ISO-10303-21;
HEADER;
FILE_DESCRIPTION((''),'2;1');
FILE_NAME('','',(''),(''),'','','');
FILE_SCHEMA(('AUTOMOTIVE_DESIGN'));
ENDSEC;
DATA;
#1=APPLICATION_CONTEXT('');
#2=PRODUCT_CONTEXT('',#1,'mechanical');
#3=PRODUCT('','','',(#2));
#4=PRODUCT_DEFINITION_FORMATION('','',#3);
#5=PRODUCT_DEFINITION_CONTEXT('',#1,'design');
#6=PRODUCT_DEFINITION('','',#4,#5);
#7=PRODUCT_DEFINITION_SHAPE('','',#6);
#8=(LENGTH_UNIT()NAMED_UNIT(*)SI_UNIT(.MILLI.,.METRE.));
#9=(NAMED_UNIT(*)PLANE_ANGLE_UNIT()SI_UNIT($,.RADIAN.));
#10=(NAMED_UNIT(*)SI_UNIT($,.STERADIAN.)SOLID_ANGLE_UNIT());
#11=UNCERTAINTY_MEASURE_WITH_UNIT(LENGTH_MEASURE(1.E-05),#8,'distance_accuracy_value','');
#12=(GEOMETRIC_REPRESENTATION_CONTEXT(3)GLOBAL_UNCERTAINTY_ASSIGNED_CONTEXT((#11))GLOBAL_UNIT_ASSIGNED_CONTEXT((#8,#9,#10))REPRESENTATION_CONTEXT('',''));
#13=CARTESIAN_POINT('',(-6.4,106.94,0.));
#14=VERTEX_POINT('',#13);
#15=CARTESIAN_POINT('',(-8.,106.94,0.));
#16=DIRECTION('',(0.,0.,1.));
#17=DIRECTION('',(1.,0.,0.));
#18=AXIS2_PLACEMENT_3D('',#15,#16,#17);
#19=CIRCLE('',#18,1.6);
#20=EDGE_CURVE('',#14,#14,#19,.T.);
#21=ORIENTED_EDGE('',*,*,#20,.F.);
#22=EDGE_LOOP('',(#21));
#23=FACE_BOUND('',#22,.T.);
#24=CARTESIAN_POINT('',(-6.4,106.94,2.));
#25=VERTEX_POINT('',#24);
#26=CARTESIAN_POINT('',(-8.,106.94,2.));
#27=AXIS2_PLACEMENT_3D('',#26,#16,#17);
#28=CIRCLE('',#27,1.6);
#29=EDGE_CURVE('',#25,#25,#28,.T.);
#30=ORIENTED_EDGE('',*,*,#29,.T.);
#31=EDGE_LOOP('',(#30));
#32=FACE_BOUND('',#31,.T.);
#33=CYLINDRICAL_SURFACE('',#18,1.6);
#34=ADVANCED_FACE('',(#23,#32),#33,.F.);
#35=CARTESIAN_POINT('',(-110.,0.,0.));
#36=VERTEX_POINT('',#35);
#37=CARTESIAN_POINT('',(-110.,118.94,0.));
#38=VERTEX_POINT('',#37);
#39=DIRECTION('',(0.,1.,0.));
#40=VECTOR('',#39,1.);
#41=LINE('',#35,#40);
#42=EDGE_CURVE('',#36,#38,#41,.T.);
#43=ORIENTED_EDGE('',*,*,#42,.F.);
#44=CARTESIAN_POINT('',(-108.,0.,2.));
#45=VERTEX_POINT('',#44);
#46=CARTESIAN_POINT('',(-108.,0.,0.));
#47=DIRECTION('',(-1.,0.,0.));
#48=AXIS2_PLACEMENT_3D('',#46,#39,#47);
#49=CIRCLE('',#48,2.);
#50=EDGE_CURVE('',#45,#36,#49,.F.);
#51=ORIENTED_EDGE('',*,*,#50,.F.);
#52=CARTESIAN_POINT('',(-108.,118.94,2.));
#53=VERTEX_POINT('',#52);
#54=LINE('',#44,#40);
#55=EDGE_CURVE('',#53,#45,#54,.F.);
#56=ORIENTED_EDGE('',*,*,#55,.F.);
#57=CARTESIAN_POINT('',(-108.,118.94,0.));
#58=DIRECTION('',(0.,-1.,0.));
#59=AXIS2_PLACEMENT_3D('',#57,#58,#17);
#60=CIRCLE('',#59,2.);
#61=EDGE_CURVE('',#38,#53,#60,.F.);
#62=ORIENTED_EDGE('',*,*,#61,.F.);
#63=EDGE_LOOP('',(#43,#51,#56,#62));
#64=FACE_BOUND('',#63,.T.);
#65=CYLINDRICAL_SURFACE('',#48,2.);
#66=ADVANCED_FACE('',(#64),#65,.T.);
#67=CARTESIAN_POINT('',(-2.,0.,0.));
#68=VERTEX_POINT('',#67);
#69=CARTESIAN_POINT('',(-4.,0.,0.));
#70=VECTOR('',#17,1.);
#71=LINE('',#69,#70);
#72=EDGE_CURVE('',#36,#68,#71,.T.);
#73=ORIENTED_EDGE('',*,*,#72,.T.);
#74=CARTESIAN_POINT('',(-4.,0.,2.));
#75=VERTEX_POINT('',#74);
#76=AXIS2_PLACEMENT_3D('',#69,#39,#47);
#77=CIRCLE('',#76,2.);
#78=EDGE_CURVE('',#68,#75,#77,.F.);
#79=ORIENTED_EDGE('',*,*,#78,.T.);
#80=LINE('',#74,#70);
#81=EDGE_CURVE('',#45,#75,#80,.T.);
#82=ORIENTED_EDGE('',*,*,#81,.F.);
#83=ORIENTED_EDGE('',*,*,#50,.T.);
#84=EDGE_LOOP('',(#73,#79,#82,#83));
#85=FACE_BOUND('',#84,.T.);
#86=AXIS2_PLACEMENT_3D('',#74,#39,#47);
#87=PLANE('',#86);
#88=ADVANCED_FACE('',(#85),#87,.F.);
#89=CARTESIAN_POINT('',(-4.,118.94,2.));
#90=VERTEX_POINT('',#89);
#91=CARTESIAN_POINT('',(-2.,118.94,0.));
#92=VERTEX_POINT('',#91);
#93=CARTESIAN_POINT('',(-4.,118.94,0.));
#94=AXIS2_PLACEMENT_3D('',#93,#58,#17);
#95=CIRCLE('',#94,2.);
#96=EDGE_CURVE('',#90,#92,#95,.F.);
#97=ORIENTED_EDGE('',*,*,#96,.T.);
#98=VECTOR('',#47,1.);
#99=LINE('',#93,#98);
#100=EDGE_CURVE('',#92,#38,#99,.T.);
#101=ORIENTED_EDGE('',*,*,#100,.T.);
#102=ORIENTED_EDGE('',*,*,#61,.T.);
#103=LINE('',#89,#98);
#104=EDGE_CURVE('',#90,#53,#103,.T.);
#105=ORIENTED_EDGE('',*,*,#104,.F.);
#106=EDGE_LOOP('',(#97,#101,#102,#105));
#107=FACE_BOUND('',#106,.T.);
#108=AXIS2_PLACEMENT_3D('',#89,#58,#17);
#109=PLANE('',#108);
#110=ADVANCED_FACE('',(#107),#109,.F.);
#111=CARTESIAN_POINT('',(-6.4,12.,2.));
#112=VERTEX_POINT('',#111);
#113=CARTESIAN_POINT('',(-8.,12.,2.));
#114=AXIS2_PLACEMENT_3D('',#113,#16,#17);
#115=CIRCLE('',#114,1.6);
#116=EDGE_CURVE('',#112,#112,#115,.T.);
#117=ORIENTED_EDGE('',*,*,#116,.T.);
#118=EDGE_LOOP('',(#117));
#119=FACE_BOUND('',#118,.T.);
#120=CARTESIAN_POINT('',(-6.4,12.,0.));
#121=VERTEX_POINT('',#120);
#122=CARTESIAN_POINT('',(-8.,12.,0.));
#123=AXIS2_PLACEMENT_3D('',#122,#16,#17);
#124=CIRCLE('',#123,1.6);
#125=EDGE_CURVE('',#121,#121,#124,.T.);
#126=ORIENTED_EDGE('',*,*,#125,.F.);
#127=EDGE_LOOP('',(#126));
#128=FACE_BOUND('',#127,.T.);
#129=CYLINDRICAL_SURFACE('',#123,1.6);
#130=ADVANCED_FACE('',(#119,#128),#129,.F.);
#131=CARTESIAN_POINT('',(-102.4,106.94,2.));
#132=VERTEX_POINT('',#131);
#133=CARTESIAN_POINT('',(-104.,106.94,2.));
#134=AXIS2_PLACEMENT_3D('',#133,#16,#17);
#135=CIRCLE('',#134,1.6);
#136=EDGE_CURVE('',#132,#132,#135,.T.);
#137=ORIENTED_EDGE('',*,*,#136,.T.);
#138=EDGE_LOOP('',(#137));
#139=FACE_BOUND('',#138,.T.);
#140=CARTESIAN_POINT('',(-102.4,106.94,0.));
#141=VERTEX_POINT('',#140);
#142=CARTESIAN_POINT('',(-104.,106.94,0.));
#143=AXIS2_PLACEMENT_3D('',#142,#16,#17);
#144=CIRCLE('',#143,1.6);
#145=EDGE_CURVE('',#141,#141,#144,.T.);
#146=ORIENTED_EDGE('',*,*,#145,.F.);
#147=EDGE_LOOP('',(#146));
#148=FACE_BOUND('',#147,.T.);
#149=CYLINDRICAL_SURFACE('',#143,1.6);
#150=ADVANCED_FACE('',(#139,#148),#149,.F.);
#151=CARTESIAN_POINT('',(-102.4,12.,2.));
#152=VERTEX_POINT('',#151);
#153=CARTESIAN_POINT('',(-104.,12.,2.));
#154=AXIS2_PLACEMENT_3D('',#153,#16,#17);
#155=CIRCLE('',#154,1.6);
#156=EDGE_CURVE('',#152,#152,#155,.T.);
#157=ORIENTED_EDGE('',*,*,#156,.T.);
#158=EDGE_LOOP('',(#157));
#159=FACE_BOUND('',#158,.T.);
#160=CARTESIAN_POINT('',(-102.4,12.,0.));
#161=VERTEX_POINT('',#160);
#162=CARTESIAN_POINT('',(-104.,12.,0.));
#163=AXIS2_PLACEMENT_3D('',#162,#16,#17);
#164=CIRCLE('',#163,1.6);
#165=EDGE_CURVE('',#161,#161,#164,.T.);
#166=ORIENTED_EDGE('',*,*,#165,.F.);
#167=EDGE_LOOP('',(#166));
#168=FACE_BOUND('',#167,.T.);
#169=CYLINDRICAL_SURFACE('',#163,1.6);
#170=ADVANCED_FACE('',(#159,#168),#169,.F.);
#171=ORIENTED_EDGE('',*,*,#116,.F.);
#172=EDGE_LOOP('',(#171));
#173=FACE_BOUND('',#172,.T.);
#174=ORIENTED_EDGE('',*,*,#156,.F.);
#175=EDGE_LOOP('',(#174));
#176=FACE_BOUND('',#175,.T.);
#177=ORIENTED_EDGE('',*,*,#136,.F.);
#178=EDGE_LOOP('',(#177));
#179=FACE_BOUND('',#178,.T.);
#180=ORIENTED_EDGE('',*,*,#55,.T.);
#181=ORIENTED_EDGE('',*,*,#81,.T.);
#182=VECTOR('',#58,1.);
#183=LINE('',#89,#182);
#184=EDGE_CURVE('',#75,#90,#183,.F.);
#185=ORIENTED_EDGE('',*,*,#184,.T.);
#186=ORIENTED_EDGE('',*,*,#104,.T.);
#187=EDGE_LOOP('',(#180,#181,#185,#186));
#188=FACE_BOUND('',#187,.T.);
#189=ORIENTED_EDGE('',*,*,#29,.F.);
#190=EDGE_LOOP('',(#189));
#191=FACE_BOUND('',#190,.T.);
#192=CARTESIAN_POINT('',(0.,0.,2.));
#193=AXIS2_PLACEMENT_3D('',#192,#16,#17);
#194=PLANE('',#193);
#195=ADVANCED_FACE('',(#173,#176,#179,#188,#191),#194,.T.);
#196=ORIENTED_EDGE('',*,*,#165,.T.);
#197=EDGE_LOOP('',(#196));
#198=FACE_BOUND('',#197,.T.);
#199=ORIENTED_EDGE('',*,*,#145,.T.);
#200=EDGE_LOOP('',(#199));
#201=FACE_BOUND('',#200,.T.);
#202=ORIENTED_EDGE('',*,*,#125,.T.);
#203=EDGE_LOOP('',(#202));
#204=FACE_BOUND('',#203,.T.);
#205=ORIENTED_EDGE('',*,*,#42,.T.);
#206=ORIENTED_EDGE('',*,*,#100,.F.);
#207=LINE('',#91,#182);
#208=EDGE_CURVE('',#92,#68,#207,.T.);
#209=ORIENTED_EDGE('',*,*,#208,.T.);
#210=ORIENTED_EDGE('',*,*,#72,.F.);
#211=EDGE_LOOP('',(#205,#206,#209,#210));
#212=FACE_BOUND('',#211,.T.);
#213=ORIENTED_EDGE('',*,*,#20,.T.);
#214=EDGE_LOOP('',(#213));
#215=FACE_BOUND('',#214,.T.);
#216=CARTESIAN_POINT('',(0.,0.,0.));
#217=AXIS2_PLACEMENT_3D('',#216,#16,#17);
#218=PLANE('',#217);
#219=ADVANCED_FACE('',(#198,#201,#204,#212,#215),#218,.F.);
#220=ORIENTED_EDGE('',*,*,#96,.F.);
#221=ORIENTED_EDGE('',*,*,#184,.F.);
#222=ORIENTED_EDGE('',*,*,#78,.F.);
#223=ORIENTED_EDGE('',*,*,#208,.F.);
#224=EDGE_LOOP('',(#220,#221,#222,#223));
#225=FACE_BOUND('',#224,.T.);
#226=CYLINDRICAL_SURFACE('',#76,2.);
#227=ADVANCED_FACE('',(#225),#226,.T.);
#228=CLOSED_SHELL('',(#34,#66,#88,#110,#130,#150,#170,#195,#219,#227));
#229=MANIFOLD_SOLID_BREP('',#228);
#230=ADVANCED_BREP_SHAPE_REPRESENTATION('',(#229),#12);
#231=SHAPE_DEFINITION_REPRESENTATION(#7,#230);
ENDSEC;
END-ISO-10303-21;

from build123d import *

# Parameters (mm, degrees)
SZKIC1_W                    = 104
SZKIC1_H                    = 118.94
DODANIE_WYCI_GNI_CIE1_DEPTH = 2
SZKIC2_W                    = 2
SZKIC2_H                    = 118.94
DODANIE_WYCI_GNI_CIE2_DEPTH = 2
SZKIC3_R                    = 1.6
WYTNIJ_WYCI_GNI_CIE1_DEPTH  = 2
ZAOKR_GLENIE1_R             = 2


with BuildPart() as part:
    # Szkic1 → Dodanie-wyciągnięcie1 (new body)
    with BuildSketch(Plane.XY):
        with Locations((-56, 59.47)):
            Rectangle(SZKIC1_W, SZKIC1_H)
    extrude(amount=DODANIE_WYCI_GNI_CIE1_DEPTH)

    # Szkic2 → Dodanie-wyciągnięcie2 (add)
    with BuildSketch(Plane(origin=(0, 0, 0), x_dir=(-1, 0, 0), z_dir=(0, 0, -1))):
        with Locations((109, 59.47)):
            Rectangle(SZKIC2_W, SZKIC2_H)
        with Locations((3, 59.47)):
            Rectangle(SZKIC2_W, SZKIC2_H)
    extrude(amount=-DODANIE_WYCI_GNI_CIE2_DEPTH)

    # Szkic3 → Wytnij-wyciągnięcie1 (cut)
    with BuildSketch(Plane.XY.offset(2)):
        with Locations((-104, 12)):
            Circle(SZKIC3_R)
        with Locations((-8, 12)):
            Circle(SZKIC3_R)
        with Locations((-8, 106.94)):
            Circle(SZKIC3_R)
        with Locations((-104, 106.94)):
            Circle(SZKIC3_R)
    extrude(amount=-WYTNIJ_WYCI_GNI_CIE1_DEPTH, mode=Mode.SUBTRACT)

    # Zaokrąglenie1
    zaokr_glenie1_edges = [part.edges().sort_by_distance(p)[0] for p in [
        (-2, 59.47, 2),
        (-110, 59.47, 2),
    ]]
    fillet(zaokr_glenie1_edges, radius=ZAOKR_GLENIE1_R - 0.0001)  # a hair under: the kernel refuses the full size


solid = part.part
